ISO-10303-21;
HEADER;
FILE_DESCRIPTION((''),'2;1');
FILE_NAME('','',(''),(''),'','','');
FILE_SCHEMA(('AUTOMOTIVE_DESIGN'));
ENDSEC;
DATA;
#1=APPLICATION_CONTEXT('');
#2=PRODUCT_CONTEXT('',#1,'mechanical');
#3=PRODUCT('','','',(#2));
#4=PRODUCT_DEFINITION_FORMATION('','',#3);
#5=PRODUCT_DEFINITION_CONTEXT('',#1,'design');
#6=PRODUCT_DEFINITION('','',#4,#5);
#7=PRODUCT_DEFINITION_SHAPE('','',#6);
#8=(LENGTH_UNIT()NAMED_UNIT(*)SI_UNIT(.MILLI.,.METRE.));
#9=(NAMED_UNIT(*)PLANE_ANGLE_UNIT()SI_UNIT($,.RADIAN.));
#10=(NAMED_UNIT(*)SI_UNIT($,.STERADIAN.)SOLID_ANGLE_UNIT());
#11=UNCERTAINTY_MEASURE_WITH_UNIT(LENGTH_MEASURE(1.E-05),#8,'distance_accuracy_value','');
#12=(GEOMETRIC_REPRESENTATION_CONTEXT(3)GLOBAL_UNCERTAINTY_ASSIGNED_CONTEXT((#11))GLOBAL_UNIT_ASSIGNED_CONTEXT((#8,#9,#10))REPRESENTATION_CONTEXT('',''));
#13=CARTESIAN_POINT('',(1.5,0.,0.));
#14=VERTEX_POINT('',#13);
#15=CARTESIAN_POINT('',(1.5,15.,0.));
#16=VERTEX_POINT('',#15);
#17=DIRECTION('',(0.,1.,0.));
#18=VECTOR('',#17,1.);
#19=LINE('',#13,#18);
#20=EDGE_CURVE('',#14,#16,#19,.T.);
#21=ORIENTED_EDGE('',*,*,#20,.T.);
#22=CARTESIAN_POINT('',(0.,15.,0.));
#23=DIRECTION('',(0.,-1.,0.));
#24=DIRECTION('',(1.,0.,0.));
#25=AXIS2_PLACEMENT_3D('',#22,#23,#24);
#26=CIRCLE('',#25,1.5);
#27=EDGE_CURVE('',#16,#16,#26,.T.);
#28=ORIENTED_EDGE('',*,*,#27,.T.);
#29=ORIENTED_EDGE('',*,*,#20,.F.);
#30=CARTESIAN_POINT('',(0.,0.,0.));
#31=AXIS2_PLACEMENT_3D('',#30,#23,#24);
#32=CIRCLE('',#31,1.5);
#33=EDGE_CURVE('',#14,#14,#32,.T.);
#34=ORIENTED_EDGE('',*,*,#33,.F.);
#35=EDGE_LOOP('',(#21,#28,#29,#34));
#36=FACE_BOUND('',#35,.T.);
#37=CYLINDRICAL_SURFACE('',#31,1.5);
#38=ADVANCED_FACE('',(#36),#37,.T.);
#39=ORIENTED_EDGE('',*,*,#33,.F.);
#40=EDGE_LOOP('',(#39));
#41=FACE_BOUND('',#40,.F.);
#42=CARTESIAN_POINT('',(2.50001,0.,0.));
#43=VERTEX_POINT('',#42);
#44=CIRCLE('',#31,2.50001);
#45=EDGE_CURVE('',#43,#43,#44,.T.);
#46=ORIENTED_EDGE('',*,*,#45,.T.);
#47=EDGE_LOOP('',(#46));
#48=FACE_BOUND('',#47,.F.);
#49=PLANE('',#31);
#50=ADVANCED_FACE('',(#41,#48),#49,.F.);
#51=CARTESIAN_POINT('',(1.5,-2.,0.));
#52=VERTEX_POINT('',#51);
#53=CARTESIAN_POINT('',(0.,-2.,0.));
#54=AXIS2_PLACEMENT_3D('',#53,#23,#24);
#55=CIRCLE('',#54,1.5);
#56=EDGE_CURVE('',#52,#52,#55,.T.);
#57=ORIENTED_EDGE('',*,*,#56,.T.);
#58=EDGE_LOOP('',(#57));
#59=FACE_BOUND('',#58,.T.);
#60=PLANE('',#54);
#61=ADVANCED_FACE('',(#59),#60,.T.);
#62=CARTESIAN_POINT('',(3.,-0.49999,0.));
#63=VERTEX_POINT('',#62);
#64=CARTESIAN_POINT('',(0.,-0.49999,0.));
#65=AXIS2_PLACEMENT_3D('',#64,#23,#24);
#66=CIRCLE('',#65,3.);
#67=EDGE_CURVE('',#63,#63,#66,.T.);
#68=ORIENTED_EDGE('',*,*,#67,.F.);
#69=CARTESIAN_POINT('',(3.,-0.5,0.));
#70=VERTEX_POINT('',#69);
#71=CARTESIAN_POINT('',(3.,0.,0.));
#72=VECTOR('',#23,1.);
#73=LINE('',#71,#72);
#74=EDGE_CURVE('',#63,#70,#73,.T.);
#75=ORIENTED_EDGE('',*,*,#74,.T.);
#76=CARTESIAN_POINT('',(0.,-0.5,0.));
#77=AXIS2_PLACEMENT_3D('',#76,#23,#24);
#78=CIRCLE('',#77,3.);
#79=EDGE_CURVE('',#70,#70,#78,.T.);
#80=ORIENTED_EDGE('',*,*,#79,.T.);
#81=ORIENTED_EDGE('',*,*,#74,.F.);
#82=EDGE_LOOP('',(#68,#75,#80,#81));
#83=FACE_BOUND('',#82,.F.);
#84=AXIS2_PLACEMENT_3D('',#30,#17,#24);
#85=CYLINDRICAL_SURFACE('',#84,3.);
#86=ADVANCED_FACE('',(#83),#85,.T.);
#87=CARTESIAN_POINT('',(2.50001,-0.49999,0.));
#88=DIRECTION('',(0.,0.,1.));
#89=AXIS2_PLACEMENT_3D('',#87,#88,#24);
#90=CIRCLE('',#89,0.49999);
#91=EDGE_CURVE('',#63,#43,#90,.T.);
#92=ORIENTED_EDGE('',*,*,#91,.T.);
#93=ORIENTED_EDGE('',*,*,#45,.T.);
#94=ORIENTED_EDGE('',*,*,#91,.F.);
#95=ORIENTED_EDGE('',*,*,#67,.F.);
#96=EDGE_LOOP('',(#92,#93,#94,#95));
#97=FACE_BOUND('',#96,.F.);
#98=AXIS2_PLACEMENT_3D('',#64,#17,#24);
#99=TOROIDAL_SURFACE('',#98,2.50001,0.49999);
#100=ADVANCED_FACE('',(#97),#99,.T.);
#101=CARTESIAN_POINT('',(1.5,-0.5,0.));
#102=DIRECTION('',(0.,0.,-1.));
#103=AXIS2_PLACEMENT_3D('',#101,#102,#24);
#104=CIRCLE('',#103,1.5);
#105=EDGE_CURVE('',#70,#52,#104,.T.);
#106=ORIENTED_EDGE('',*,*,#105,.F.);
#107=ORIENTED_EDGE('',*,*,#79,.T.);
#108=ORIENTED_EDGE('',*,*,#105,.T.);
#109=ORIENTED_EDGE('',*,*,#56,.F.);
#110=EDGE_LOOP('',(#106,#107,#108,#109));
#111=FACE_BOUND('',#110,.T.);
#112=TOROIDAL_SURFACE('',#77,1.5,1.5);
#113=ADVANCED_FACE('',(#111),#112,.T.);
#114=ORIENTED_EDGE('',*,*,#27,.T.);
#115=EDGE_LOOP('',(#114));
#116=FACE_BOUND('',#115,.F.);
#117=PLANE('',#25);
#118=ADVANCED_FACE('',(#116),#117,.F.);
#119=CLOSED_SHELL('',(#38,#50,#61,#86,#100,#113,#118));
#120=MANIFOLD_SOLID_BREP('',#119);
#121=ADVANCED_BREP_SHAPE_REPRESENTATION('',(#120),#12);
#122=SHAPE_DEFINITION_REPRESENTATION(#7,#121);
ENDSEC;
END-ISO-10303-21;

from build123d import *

# Parameters (mm, degrees)
F0_R     = 1.5
F1_DEPTH = 15
F2_R     = 3
F3_DEPTH = 2
F4_R     = 1.5
F5_R     = 0.49999


# Not quite as in the source:
# - a fillet or chamfer is up to 0.001 mm smaller than in the source, because OpenCascade refuses the exact size


with BuildPart() as f1:
    # F0 (on Front) → F1 (new body)
    with BuildSketch(Plane.XZ):
        Circle(F0_R)
    extrude(amount=-F1_DEPTH)

    # F2 (on face) → F3 (join)
    with BuildSketch(Plane.XZ):
        Circle(F2_R)
    extrude(amount=F3_DEPTH)

    # F4
    f4_edges = [f1.edges().sort_by_distance(p)[0] for p in [
        (-3, -2, 0),
    ]]
    fillet(f4_edges, radius=F4_R)

    # F5 (radius 0.5 in the source; OpenCascade refuses exactly that, so slightly less here)
    f5_edges = [f1.edges().sort_by_distance(p)[0] for p in [
        (-3, 0, 0),
    ]]
    fillet(f5_edges, radius=F5_R)


solid = f1.part
